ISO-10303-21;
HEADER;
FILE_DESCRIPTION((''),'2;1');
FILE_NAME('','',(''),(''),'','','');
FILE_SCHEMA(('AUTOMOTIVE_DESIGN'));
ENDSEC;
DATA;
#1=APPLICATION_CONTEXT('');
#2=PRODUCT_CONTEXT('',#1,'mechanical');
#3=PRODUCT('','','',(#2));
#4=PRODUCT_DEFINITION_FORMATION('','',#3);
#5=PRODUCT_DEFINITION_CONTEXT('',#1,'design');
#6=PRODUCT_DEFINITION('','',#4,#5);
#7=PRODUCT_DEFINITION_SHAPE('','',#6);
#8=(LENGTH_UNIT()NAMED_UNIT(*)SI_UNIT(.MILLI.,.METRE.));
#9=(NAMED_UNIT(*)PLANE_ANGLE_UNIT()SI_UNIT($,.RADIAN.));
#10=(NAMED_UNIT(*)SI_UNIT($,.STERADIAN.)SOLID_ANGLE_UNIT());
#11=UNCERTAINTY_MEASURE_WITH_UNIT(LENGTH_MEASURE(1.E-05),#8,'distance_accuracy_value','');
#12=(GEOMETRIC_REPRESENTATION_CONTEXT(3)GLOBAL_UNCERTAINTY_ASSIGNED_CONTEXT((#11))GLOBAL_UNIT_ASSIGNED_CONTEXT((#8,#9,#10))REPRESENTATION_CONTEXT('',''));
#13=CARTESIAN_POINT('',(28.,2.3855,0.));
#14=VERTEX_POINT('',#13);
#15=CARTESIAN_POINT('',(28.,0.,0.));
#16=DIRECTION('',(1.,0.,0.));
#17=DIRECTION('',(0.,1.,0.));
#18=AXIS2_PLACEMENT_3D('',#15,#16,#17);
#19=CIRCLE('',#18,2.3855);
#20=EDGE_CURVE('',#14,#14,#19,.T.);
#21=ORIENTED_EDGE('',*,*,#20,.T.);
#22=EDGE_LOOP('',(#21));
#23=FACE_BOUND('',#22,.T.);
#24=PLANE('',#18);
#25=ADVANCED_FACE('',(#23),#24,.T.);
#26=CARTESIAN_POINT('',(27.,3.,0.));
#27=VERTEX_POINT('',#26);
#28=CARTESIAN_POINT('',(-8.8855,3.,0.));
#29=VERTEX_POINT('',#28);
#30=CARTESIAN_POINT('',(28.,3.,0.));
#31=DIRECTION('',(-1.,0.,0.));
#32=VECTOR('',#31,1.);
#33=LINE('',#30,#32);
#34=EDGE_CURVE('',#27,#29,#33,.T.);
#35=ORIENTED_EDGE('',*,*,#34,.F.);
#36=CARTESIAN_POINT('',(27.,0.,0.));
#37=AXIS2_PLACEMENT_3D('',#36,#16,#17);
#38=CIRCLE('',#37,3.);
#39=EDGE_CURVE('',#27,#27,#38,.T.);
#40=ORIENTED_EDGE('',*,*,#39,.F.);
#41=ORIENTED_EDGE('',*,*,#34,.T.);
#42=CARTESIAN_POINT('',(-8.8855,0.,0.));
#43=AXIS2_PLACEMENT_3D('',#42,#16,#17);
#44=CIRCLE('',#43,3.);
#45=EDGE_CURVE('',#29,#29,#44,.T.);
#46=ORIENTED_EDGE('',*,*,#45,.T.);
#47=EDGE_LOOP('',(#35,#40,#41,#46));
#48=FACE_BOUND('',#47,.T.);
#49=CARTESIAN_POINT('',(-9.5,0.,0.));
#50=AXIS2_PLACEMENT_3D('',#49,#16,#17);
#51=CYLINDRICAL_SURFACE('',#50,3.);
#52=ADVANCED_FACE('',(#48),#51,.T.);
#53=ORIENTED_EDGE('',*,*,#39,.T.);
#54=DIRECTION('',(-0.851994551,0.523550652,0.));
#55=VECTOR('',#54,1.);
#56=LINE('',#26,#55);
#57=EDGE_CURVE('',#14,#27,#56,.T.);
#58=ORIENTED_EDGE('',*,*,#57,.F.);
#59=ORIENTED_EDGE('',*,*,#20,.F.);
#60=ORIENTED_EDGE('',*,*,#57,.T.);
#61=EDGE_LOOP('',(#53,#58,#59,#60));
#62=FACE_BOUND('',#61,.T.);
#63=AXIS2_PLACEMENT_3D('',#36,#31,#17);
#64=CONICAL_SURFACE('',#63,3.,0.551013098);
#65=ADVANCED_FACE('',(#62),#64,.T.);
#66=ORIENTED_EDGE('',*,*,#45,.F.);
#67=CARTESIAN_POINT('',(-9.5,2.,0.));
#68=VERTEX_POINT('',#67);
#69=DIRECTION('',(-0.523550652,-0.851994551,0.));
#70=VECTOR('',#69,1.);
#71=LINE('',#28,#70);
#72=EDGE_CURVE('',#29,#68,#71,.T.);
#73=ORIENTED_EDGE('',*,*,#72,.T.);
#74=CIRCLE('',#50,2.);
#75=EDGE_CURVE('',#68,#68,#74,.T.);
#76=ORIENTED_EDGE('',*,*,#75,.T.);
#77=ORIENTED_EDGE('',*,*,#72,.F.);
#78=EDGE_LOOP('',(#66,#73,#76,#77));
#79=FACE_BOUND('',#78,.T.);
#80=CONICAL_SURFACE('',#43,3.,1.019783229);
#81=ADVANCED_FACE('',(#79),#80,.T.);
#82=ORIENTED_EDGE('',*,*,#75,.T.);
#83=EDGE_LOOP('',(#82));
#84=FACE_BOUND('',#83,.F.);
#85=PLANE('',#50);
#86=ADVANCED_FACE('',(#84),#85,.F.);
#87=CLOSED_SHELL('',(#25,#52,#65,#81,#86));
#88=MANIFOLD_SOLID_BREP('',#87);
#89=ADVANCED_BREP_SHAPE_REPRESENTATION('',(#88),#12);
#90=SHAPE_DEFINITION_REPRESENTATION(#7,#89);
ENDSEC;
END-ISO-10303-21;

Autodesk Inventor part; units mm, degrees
ref_plane "YZ Plane" through (0, 0, 0) normal (1, 0, 0) x (0, 1, 0)
ref_plane "XZ Plane" through (0, 0, 0) normal (0, 1, 0) x (-1, 0, 0)
sketch "Szkic1" plane through (0, 0, 0) normal (0, 0, 1) x (1, 0, 0)
  line L0 (28, 3) -> (28, 0)
  line L1 (-9.5, 0) -> (28, 0)
  line L2 (-17, 0) -> (35.5, 0) projected
  line L3 (0, 3.6) -> (0, -0.6) projected
  line L4 (-9.5, 3) -> (-9.5, 0)
  line L5 (10, 3) -> (10, 0) construction
  line L6 (-17, 0) -> (35.5, 0) projected
  line L7 (-9.5, 3) -> (28, 3)
  dimension "d4" = 9.5
  dimension "d5" = 28
  dimension "d6" = 18
  dimension "d13" = 6
revolve "Bryła" add sketch "Szkic1" angle 360 about axis through (-9.5, 0, 0) along (1, 0, 0)
thread "Gwint1" size "M6x1" class "6g" standard "ISO Metric profile" length 9.5
thread "Gwint2" size "M6x1" class "6g" standard "ISO Metric profile" length 18.6135
chamfer "Faza1" distance 0.6145 distance2 1 1 edges at (28, -3, 0) measured on face at (28, 1.0659, 1.0214)
chamfer "Faza2" distance 0.6145 distance2 1 1 edges at (-9.5, -3, 0) measured on face at (14.8333, 2.9612, -0.4812)
ref_plane "Work Plane1" through (2.75, 0, 0) normal (0, -1, 0) x (1, 0, 0)
equation "\"d4\" = KOH"
equation "\"d5\" = NLG"
equation "\"d6\" = GEL"
equation "\"d13\" = GD"
equation "\"d1\" = KOH"
equation "\"d7\" = GEL + GAL"
equation "\"d10\" = -0.5 * SPD + 0.5 * GD"
equation "\"d12\" = -0.5 * SPD + 0.5 * GD"
equation "\"NLG\" = 28"
equation "\"GEL\" = 18"
equation "\"GAL\" = 0.61345 * PTC"
equation "\"SPD\" = 4"
equation "\"d0\" = GD"
equation "\"GUL\" = 0.61345 * PTC"
equation "\"KOH\" = 9.5"
equation "\"GD\" = 6"
equation "\"BDM\" = NND"
equation "\"GUL1\" = GUL"
equation "\"GAL1\" = GAL"
equation "\"d80\" = -GUL - GEL"
equation "\"d86\" = -KOH + GUL1"
equation "\"PTC\" = 1"
equation "\"THREADDIA\" = 6"
equation "\"TOA\" = 30deg"
equation "\"NND\" = 6"
equation "\"GD1\" = THREADDIA - 1.2269 * PTC"
properties part number "DIN 835 - M6 x 28" material "Stal, miękka"
